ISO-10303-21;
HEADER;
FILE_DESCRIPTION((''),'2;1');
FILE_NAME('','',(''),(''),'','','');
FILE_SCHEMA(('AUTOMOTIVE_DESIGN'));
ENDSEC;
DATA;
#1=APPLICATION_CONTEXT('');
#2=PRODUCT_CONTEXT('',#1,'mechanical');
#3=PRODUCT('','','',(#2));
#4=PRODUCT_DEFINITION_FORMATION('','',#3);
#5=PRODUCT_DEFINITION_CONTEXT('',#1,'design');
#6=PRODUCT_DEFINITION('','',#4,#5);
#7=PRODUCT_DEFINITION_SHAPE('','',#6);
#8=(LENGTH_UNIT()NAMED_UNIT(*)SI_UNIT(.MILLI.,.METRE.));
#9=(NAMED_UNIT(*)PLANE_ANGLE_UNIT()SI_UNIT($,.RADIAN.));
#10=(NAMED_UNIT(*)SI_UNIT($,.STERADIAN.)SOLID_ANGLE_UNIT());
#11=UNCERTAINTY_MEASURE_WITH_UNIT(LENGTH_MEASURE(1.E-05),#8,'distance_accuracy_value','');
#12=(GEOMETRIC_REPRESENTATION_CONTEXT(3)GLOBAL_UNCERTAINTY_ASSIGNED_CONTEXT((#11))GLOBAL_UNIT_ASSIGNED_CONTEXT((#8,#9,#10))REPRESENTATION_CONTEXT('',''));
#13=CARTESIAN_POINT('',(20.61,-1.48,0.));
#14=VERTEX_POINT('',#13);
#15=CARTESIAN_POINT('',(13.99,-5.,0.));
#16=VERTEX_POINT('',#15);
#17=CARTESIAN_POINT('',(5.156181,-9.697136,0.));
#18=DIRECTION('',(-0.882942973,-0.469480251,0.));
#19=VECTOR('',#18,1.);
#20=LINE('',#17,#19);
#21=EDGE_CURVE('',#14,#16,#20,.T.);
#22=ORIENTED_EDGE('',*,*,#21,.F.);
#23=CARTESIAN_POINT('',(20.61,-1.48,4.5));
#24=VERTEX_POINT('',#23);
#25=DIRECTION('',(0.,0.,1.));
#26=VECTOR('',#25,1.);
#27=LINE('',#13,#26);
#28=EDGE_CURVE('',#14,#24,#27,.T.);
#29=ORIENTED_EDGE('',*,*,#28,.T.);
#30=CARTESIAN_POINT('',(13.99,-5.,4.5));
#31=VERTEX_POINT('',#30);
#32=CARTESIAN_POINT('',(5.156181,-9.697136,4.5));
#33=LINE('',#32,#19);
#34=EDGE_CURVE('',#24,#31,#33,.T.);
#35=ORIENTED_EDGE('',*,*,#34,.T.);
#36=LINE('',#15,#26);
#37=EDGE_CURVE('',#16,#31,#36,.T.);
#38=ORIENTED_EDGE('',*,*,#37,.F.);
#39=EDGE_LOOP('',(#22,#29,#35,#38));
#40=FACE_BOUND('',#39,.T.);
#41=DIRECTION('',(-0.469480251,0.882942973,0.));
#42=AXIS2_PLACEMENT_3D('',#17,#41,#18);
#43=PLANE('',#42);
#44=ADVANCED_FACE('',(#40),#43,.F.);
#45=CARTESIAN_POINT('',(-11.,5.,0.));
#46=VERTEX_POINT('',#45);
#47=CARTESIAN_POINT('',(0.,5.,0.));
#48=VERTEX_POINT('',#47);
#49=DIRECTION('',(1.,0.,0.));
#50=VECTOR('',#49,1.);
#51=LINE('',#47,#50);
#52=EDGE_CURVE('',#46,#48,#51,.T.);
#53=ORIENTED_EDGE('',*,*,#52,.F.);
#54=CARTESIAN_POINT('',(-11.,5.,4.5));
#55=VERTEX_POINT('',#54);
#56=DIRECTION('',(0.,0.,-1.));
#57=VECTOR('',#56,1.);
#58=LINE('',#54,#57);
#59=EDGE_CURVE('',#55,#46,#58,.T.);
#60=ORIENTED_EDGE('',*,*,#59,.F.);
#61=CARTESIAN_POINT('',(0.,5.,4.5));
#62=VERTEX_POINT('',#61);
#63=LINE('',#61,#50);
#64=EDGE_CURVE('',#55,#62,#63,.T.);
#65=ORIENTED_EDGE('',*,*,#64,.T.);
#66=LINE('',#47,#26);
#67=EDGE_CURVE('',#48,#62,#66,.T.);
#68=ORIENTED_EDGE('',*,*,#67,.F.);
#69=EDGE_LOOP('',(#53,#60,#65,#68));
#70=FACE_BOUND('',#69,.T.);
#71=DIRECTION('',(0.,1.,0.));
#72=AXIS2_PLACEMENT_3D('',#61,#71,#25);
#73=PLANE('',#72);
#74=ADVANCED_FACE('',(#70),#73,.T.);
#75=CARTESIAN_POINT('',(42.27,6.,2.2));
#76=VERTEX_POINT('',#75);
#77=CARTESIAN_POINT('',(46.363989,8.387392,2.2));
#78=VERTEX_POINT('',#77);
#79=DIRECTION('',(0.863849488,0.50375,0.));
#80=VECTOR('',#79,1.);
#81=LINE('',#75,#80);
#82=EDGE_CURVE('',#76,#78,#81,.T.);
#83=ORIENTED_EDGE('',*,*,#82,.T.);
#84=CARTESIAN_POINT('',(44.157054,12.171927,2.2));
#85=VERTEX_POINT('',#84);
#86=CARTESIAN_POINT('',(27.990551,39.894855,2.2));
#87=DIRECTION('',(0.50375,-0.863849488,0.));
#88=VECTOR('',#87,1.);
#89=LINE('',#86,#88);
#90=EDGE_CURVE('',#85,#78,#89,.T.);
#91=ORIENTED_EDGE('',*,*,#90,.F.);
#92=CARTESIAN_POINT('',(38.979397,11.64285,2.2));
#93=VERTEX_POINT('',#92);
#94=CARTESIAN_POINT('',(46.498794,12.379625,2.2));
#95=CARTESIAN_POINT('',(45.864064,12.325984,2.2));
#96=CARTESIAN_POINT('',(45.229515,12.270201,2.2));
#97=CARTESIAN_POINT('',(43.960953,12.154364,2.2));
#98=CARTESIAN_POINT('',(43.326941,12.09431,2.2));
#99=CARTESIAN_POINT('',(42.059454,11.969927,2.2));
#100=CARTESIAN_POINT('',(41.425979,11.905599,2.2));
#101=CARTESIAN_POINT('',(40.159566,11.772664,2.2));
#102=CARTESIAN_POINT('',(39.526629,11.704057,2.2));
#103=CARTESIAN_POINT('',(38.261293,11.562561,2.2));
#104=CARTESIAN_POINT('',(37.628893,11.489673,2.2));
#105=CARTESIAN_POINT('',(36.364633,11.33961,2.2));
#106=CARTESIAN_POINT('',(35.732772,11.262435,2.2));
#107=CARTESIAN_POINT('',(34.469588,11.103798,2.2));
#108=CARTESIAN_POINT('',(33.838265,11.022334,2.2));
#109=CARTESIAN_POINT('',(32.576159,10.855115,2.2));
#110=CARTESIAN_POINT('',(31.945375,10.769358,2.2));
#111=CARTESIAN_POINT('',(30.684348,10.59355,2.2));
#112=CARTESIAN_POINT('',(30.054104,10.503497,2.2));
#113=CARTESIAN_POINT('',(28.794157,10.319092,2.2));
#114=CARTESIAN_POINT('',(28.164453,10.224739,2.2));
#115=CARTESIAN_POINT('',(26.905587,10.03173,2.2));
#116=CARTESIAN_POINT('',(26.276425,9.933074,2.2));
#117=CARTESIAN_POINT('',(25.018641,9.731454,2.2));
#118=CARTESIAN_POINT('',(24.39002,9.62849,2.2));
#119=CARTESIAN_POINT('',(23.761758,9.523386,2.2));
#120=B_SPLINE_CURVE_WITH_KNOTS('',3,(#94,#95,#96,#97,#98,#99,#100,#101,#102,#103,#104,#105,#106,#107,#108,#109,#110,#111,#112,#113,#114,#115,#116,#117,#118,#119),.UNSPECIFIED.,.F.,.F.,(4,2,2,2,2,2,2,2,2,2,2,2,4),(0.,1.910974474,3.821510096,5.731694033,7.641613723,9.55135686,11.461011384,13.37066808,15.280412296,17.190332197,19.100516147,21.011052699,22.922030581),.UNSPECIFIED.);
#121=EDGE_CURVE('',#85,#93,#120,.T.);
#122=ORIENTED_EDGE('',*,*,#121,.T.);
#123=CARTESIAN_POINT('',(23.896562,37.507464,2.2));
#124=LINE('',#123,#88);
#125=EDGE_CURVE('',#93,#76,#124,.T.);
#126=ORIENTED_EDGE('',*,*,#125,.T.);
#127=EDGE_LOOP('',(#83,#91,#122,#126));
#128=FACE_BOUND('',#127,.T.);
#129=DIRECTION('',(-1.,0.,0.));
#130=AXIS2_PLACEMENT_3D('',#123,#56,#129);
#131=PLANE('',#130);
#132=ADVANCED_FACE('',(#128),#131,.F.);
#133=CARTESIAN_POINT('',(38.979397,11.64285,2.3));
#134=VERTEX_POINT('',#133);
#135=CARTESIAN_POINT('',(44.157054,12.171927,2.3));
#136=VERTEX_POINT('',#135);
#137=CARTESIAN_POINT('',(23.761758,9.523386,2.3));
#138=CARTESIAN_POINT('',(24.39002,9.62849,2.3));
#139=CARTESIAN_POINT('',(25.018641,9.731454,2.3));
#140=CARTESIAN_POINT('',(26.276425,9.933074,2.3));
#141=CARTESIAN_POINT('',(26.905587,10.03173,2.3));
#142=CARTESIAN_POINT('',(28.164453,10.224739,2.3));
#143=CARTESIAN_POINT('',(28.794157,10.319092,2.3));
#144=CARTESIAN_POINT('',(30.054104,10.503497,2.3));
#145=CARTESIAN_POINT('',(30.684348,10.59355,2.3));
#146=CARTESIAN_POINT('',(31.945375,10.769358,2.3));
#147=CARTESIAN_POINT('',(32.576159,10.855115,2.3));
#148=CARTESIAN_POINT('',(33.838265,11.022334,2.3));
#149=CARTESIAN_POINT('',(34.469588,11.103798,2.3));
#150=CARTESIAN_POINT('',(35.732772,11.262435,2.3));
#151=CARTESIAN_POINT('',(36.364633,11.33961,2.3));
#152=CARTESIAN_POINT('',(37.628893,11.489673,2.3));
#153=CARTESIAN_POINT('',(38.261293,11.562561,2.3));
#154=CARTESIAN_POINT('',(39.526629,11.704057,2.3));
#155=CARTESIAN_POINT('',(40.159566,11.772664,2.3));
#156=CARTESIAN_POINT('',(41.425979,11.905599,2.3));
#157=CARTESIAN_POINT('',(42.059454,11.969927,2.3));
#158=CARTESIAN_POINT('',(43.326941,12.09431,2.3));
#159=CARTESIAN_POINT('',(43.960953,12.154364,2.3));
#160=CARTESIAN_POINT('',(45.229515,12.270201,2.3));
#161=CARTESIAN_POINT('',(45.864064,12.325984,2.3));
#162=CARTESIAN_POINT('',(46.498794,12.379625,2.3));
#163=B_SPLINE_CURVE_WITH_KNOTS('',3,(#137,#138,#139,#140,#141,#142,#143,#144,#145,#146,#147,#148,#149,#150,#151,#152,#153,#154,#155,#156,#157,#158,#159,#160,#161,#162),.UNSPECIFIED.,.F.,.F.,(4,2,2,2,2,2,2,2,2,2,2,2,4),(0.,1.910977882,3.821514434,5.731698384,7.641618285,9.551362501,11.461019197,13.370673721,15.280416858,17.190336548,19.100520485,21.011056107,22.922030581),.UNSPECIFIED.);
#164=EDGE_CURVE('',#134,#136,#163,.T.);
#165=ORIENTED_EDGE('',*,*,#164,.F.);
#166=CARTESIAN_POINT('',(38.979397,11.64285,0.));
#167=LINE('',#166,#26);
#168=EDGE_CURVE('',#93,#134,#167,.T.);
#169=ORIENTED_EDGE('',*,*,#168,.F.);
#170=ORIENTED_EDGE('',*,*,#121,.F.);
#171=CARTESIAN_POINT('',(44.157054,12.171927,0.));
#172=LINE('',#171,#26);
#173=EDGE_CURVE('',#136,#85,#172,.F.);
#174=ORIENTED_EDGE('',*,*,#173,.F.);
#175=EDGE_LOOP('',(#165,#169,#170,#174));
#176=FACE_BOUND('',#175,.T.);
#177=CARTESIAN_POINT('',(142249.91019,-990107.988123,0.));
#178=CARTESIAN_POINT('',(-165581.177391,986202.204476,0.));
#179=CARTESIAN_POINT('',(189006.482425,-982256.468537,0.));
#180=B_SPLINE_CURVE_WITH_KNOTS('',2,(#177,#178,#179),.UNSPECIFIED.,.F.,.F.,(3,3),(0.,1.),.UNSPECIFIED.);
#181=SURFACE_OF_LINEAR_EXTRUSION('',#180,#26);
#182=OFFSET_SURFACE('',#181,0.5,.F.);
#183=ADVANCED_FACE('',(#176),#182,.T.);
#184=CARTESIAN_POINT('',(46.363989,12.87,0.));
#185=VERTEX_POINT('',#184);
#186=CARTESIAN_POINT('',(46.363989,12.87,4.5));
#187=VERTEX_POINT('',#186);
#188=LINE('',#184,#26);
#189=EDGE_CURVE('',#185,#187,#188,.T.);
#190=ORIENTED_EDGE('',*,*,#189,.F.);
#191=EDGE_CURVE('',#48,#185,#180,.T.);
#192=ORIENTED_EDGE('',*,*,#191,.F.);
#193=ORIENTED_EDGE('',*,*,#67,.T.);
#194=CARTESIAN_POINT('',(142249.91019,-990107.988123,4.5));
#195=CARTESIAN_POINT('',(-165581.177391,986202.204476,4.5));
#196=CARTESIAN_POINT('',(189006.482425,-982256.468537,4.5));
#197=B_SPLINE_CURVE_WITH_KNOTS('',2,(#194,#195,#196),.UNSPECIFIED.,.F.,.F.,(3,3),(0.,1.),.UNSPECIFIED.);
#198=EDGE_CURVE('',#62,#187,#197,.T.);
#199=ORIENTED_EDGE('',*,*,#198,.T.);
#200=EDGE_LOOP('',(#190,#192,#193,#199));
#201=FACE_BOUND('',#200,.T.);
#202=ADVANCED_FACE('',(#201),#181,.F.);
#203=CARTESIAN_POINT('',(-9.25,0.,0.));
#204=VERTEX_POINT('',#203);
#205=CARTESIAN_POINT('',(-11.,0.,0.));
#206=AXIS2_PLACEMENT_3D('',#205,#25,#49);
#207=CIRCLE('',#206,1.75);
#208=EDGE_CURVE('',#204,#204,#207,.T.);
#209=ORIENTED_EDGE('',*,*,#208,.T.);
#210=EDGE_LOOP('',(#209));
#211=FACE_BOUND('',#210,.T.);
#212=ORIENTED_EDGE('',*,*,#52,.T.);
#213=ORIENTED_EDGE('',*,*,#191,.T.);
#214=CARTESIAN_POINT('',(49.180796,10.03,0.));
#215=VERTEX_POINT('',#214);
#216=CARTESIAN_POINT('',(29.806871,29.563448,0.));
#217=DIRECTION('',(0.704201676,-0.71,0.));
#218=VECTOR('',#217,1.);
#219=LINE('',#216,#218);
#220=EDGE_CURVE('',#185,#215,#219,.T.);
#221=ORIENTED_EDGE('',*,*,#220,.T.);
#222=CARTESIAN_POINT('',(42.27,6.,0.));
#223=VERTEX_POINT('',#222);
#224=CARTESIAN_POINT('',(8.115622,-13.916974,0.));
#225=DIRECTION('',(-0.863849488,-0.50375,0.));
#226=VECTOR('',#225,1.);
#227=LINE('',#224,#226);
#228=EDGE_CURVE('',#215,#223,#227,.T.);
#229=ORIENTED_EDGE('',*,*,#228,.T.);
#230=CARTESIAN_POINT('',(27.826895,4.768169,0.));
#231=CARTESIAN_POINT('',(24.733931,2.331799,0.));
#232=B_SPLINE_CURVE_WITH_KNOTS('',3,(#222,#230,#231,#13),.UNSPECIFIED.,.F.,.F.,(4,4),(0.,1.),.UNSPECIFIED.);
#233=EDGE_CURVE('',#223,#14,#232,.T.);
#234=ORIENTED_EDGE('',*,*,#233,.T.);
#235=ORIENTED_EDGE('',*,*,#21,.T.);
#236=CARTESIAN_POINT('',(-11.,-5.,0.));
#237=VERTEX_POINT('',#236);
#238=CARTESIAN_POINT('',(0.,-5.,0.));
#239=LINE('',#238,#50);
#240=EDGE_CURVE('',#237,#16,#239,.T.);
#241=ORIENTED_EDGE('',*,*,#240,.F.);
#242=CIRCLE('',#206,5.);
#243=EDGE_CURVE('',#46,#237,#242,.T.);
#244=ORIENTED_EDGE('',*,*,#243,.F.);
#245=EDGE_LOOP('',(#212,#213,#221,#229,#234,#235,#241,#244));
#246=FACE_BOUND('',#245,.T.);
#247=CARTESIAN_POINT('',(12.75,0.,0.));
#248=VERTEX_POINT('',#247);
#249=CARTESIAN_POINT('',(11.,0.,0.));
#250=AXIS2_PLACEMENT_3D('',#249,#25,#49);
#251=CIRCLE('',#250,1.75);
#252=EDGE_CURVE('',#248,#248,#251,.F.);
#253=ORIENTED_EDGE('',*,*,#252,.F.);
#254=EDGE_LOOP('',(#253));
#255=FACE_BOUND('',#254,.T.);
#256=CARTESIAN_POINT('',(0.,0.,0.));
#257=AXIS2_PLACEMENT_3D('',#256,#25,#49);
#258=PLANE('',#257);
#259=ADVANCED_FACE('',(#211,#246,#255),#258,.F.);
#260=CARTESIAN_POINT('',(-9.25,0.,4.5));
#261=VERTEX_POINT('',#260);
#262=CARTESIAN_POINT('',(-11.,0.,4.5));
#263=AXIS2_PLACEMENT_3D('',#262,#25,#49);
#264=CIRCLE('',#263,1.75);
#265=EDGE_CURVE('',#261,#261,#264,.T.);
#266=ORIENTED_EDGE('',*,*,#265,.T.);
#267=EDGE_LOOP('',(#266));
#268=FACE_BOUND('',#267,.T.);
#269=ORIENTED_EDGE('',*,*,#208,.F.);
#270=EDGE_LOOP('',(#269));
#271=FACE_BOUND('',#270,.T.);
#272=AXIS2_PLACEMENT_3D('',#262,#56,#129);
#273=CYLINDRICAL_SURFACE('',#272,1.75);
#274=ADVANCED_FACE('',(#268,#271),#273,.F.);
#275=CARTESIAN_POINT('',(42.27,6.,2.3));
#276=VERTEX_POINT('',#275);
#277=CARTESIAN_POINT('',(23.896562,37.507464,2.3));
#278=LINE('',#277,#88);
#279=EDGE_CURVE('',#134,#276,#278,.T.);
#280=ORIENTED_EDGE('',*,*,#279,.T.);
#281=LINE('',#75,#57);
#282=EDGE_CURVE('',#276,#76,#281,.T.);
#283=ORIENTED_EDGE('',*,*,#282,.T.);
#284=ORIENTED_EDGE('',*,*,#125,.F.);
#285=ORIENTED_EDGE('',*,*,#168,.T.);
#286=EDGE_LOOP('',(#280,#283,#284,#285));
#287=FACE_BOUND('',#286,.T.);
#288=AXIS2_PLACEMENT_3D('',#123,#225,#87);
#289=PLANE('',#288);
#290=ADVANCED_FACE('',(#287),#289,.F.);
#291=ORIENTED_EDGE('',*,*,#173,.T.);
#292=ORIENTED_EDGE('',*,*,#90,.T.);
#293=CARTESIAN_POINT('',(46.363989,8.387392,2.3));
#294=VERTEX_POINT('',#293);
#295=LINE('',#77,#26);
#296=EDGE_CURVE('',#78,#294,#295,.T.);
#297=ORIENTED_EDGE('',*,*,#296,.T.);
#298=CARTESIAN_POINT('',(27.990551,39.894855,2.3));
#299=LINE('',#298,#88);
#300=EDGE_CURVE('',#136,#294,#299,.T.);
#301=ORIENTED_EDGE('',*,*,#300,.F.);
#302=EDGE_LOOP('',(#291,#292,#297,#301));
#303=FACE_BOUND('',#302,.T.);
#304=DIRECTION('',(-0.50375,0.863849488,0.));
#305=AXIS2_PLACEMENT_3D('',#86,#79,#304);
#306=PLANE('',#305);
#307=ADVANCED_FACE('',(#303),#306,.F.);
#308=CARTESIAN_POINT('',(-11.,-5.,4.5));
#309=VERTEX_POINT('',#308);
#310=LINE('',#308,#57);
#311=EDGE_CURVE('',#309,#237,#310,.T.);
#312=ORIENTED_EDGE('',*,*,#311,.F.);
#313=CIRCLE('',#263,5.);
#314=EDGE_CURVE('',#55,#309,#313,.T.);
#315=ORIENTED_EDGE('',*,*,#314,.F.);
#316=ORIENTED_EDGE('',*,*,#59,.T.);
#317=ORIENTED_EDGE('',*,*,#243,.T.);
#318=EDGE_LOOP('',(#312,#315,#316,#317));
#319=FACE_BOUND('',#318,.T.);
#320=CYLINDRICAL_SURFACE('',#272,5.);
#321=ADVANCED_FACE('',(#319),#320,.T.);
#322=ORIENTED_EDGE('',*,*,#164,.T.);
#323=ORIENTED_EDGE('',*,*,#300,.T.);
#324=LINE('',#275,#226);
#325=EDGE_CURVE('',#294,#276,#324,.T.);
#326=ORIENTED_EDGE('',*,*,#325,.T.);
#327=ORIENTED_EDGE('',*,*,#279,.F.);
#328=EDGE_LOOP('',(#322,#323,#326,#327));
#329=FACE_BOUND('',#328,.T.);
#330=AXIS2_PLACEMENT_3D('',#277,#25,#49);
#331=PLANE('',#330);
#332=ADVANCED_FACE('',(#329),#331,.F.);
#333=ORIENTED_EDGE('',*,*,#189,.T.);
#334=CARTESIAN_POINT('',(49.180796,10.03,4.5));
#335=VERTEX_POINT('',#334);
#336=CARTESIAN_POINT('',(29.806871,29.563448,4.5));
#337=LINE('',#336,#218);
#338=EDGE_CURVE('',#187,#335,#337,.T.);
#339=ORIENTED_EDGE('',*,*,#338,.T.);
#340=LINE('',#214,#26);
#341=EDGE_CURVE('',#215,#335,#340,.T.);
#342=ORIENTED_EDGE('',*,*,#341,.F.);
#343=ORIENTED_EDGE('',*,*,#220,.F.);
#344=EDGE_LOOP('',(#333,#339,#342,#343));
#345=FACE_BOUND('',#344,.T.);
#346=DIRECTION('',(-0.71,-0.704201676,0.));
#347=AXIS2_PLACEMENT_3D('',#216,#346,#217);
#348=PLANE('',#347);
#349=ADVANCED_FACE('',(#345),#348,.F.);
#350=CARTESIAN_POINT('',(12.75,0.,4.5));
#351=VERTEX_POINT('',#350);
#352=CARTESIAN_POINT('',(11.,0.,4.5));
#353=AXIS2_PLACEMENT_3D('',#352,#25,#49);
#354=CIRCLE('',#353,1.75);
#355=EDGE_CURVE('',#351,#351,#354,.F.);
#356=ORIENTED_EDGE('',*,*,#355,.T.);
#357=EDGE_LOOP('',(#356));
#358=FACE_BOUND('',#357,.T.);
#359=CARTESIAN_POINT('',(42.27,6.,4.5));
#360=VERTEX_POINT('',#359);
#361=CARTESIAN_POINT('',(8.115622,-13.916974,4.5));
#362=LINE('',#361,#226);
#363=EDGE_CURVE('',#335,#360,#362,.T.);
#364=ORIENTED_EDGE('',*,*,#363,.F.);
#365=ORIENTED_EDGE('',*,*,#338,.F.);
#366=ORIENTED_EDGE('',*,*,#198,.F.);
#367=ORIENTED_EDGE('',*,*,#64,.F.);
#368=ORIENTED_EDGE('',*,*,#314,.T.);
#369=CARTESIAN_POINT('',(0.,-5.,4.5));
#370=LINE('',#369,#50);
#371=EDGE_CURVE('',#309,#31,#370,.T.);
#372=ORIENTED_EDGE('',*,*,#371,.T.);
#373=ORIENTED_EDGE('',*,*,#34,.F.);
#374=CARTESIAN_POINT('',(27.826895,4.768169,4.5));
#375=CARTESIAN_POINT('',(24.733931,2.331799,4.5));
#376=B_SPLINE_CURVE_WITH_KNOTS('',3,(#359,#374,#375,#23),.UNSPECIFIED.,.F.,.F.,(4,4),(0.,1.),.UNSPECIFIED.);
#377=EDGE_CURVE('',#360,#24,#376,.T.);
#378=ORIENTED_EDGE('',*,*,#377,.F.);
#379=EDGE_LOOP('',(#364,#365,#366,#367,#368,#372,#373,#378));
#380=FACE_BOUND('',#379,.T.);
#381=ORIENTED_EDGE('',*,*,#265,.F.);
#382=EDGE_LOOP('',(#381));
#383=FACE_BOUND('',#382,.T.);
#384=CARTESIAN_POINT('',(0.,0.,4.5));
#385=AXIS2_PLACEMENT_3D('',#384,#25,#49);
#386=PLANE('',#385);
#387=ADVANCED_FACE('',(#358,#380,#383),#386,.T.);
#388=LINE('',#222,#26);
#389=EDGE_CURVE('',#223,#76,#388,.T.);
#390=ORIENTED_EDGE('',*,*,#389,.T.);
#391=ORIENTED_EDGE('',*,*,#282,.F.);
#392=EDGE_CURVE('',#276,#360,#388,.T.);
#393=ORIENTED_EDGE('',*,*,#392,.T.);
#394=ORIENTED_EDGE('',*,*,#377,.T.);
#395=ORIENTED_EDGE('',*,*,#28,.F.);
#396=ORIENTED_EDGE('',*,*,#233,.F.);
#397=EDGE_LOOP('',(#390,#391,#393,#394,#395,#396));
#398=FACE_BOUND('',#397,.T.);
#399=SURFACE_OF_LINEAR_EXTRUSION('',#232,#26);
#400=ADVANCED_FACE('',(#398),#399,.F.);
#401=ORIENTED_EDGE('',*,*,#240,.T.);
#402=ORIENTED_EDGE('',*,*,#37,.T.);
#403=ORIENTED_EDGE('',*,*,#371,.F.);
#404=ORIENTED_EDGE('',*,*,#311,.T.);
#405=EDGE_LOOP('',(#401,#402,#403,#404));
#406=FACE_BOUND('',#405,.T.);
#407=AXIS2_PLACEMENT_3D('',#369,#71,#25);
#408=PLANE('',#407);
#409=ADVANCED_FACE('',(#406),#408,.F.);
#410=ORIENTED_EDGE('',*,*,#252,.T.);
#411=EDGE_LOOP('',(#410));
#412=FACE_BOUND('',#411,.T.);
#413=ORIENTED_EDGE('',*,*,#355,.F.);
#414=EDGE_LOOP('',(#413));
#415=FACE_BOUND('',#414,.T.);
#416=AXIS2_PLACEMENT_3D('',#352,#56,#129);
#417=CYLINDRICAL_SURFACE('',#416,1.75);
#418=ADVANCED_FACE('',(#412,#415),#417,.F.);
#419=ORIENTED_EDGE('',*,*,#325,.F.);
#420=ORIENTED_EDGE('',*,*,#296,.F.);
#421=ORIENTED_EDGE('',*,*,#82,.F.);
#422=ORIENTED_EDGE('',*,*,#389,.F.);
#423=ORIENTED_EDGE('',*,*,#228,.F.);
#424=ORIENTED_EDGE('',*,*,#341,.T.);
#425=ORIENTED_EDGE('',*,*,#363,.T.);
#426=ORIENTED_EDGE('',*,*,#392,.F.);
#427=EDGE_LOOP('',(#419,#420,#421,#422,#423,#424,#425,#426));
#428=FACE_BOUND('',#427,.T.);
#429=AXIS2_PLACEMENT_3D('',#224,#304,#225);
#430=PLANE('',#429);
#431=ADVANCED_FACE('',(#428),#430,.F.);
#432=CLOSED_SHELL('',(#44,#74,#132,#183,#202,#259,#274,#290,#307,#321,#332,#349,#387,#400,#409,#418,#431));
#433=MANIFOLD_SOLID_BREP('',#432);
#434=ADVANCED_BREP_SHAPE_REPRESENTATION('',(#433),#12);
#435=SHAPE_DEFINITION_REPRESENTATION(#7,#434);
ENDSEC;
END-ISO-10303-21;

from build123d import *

# Parameters (mm, degrees)
SKETCH1_R           = 5
SKETCH1_R_2         = 1.75
BOSS_EXTRUDE1_DEPTH = 4.5
BOSS_EXTRUDE2_START = -4.5
BOSS_EXTRUDE2_DEPTH = 4.5
CUT_EXTRUDE3_START  = 2.2
CUT_EXTRUDE3_DEPTH  = 0.1


# Read off the part's stored shape, not the designer's step: Cut-Extrude3
with BuildPart() as part:
    # Sketch1 → Boss-Extrude1 (new body)
    # profile 1 of 3: a face of its own
    with BuildSketch(Plane.XY):
        with Locations((-11, 0)):
            Circle(SKETCH1_R)
        with Locations((-11, 0)):
            Circle(SKETCH1_R_2, mode=Mode.SUBTRACT)
    # profile 2 of 3: a face of its own
    with BuildSketch(Plane.XY):
        with Locations((11, 0)):
            Circle(SKETCH1_R)
        with Locations((11, 0)):
            Circle(SKETCH1_R_2, mode=Mode.SUBTRACT)
    # profile 3 of 3: a face of its own
    with BuildSketch(Plane.XY):
        with BuildLine():
            Line((11, 5), (-11, 5))
            ThreePointArc((-11, 5), (-7.464466094, 3.535533906), (-6, 0))
            ThreePointArc((-6, 0), (-7.464466094, -3.535533906), (-11, -5))
            Line((-11, -5), (11.000000019, -5))
            ThreePointArc((11.000000019, -5), (6, -9e-09), (11, 5))
        make_face()
    extrude(amount=BOSS_EXTRUDE1_DEPTH)

    # Sketch5 → Boss-Extrude2 (add)
    with BuildSketch(Plane.XY.offset(4.5).offset(BOSS_EXTRUDE2_START)):
        with BuildLine():
            Line((11, -5), (13.99, -5))
            Line((13.99, -5), (20.61, -1.48))
            add(Edge.make_bspline(
                [(42.27, 6), (27.826894641, 4.768168558), (24.733930665, 2.331798547), (20.61, -1.48)],
                knots=[0, 0, 0, 0, 1, 1, 1, 1], degree=3))
            Line((42.27, 6), (49.180795902, 10.03))
            Line((49.180795902, 10.03), (46.363989199, 12.87))
            add(Edge.make_bspline(
                [(0, 5), (22.856130072, 10.87555535), (46.363989199, 12.87)],
                knots=[0, 0, 0, 1, 1, 1], degree=2))
            Line((0, 5), (11, 5))
            ThreePointArc((11, 5), (16, 0), (11, -5))
        make_face()
    extrude(amount=BOSS_EXTRUDE2_DEPTH)

    # Cut-Extrude3 outline → Cut-Extrude3 (cut)
    with BuildSketch(Plane.XY.offset(CUT_EXTRUDE3_START)):
        with BuildLine():
            add(Edge.make_bspline(
                [(38.979397214, 11.642850201), (39.348659921, 11.684028726), (39.718010294, 11.724686129), (40.087448338, 11.76482241), (40.456974055, 11.804437571), (40.826587452, 11.843531609), (41.196288532, 11.882104526), (41.566077299, 11.920156321), (41.935953757, 11.957686995), (42.305917912, 11.994696547), (42.675969767, 12.031184976), (43.046109327, 12.067152283), (43.416336595, 12.102598468), (43.786651577, 12.13752353), (44.157054276, 12.17192747)],
                knots=[0.500328151, 0.500328151, 0.500328151, 0.500328151, 0.500328151, 0.500328151, 0.500328151, 0.500328151, 0.500328151, 0.500328151, 0.500328151, 0.500328151, 0.500328151, 0.500328151, 0.500328151, 0.500437892, 0.500437892, 0.500437892, 0.500437892, 0.500437892, 0.500437892, 0.500437892, 0.500437892, 0.500437892, 0.500437892, 0.500437892, 0.500437892, 0.500437892, 0.500437892, 0.500437892], degree=14))
            Line((38.979397214, 11.642850201), (42.27, 6))
            Line((42.27, 6), (46.363989199, 8.387391656))
            Line((46.363989199, 8.387391656), (44.157054276, 12.17192747))
        make_face()
    extrude(amount=CUT_EXTRUDE3_DEPTH, mode=Mode.SUBTRACT)


solid = part.part
